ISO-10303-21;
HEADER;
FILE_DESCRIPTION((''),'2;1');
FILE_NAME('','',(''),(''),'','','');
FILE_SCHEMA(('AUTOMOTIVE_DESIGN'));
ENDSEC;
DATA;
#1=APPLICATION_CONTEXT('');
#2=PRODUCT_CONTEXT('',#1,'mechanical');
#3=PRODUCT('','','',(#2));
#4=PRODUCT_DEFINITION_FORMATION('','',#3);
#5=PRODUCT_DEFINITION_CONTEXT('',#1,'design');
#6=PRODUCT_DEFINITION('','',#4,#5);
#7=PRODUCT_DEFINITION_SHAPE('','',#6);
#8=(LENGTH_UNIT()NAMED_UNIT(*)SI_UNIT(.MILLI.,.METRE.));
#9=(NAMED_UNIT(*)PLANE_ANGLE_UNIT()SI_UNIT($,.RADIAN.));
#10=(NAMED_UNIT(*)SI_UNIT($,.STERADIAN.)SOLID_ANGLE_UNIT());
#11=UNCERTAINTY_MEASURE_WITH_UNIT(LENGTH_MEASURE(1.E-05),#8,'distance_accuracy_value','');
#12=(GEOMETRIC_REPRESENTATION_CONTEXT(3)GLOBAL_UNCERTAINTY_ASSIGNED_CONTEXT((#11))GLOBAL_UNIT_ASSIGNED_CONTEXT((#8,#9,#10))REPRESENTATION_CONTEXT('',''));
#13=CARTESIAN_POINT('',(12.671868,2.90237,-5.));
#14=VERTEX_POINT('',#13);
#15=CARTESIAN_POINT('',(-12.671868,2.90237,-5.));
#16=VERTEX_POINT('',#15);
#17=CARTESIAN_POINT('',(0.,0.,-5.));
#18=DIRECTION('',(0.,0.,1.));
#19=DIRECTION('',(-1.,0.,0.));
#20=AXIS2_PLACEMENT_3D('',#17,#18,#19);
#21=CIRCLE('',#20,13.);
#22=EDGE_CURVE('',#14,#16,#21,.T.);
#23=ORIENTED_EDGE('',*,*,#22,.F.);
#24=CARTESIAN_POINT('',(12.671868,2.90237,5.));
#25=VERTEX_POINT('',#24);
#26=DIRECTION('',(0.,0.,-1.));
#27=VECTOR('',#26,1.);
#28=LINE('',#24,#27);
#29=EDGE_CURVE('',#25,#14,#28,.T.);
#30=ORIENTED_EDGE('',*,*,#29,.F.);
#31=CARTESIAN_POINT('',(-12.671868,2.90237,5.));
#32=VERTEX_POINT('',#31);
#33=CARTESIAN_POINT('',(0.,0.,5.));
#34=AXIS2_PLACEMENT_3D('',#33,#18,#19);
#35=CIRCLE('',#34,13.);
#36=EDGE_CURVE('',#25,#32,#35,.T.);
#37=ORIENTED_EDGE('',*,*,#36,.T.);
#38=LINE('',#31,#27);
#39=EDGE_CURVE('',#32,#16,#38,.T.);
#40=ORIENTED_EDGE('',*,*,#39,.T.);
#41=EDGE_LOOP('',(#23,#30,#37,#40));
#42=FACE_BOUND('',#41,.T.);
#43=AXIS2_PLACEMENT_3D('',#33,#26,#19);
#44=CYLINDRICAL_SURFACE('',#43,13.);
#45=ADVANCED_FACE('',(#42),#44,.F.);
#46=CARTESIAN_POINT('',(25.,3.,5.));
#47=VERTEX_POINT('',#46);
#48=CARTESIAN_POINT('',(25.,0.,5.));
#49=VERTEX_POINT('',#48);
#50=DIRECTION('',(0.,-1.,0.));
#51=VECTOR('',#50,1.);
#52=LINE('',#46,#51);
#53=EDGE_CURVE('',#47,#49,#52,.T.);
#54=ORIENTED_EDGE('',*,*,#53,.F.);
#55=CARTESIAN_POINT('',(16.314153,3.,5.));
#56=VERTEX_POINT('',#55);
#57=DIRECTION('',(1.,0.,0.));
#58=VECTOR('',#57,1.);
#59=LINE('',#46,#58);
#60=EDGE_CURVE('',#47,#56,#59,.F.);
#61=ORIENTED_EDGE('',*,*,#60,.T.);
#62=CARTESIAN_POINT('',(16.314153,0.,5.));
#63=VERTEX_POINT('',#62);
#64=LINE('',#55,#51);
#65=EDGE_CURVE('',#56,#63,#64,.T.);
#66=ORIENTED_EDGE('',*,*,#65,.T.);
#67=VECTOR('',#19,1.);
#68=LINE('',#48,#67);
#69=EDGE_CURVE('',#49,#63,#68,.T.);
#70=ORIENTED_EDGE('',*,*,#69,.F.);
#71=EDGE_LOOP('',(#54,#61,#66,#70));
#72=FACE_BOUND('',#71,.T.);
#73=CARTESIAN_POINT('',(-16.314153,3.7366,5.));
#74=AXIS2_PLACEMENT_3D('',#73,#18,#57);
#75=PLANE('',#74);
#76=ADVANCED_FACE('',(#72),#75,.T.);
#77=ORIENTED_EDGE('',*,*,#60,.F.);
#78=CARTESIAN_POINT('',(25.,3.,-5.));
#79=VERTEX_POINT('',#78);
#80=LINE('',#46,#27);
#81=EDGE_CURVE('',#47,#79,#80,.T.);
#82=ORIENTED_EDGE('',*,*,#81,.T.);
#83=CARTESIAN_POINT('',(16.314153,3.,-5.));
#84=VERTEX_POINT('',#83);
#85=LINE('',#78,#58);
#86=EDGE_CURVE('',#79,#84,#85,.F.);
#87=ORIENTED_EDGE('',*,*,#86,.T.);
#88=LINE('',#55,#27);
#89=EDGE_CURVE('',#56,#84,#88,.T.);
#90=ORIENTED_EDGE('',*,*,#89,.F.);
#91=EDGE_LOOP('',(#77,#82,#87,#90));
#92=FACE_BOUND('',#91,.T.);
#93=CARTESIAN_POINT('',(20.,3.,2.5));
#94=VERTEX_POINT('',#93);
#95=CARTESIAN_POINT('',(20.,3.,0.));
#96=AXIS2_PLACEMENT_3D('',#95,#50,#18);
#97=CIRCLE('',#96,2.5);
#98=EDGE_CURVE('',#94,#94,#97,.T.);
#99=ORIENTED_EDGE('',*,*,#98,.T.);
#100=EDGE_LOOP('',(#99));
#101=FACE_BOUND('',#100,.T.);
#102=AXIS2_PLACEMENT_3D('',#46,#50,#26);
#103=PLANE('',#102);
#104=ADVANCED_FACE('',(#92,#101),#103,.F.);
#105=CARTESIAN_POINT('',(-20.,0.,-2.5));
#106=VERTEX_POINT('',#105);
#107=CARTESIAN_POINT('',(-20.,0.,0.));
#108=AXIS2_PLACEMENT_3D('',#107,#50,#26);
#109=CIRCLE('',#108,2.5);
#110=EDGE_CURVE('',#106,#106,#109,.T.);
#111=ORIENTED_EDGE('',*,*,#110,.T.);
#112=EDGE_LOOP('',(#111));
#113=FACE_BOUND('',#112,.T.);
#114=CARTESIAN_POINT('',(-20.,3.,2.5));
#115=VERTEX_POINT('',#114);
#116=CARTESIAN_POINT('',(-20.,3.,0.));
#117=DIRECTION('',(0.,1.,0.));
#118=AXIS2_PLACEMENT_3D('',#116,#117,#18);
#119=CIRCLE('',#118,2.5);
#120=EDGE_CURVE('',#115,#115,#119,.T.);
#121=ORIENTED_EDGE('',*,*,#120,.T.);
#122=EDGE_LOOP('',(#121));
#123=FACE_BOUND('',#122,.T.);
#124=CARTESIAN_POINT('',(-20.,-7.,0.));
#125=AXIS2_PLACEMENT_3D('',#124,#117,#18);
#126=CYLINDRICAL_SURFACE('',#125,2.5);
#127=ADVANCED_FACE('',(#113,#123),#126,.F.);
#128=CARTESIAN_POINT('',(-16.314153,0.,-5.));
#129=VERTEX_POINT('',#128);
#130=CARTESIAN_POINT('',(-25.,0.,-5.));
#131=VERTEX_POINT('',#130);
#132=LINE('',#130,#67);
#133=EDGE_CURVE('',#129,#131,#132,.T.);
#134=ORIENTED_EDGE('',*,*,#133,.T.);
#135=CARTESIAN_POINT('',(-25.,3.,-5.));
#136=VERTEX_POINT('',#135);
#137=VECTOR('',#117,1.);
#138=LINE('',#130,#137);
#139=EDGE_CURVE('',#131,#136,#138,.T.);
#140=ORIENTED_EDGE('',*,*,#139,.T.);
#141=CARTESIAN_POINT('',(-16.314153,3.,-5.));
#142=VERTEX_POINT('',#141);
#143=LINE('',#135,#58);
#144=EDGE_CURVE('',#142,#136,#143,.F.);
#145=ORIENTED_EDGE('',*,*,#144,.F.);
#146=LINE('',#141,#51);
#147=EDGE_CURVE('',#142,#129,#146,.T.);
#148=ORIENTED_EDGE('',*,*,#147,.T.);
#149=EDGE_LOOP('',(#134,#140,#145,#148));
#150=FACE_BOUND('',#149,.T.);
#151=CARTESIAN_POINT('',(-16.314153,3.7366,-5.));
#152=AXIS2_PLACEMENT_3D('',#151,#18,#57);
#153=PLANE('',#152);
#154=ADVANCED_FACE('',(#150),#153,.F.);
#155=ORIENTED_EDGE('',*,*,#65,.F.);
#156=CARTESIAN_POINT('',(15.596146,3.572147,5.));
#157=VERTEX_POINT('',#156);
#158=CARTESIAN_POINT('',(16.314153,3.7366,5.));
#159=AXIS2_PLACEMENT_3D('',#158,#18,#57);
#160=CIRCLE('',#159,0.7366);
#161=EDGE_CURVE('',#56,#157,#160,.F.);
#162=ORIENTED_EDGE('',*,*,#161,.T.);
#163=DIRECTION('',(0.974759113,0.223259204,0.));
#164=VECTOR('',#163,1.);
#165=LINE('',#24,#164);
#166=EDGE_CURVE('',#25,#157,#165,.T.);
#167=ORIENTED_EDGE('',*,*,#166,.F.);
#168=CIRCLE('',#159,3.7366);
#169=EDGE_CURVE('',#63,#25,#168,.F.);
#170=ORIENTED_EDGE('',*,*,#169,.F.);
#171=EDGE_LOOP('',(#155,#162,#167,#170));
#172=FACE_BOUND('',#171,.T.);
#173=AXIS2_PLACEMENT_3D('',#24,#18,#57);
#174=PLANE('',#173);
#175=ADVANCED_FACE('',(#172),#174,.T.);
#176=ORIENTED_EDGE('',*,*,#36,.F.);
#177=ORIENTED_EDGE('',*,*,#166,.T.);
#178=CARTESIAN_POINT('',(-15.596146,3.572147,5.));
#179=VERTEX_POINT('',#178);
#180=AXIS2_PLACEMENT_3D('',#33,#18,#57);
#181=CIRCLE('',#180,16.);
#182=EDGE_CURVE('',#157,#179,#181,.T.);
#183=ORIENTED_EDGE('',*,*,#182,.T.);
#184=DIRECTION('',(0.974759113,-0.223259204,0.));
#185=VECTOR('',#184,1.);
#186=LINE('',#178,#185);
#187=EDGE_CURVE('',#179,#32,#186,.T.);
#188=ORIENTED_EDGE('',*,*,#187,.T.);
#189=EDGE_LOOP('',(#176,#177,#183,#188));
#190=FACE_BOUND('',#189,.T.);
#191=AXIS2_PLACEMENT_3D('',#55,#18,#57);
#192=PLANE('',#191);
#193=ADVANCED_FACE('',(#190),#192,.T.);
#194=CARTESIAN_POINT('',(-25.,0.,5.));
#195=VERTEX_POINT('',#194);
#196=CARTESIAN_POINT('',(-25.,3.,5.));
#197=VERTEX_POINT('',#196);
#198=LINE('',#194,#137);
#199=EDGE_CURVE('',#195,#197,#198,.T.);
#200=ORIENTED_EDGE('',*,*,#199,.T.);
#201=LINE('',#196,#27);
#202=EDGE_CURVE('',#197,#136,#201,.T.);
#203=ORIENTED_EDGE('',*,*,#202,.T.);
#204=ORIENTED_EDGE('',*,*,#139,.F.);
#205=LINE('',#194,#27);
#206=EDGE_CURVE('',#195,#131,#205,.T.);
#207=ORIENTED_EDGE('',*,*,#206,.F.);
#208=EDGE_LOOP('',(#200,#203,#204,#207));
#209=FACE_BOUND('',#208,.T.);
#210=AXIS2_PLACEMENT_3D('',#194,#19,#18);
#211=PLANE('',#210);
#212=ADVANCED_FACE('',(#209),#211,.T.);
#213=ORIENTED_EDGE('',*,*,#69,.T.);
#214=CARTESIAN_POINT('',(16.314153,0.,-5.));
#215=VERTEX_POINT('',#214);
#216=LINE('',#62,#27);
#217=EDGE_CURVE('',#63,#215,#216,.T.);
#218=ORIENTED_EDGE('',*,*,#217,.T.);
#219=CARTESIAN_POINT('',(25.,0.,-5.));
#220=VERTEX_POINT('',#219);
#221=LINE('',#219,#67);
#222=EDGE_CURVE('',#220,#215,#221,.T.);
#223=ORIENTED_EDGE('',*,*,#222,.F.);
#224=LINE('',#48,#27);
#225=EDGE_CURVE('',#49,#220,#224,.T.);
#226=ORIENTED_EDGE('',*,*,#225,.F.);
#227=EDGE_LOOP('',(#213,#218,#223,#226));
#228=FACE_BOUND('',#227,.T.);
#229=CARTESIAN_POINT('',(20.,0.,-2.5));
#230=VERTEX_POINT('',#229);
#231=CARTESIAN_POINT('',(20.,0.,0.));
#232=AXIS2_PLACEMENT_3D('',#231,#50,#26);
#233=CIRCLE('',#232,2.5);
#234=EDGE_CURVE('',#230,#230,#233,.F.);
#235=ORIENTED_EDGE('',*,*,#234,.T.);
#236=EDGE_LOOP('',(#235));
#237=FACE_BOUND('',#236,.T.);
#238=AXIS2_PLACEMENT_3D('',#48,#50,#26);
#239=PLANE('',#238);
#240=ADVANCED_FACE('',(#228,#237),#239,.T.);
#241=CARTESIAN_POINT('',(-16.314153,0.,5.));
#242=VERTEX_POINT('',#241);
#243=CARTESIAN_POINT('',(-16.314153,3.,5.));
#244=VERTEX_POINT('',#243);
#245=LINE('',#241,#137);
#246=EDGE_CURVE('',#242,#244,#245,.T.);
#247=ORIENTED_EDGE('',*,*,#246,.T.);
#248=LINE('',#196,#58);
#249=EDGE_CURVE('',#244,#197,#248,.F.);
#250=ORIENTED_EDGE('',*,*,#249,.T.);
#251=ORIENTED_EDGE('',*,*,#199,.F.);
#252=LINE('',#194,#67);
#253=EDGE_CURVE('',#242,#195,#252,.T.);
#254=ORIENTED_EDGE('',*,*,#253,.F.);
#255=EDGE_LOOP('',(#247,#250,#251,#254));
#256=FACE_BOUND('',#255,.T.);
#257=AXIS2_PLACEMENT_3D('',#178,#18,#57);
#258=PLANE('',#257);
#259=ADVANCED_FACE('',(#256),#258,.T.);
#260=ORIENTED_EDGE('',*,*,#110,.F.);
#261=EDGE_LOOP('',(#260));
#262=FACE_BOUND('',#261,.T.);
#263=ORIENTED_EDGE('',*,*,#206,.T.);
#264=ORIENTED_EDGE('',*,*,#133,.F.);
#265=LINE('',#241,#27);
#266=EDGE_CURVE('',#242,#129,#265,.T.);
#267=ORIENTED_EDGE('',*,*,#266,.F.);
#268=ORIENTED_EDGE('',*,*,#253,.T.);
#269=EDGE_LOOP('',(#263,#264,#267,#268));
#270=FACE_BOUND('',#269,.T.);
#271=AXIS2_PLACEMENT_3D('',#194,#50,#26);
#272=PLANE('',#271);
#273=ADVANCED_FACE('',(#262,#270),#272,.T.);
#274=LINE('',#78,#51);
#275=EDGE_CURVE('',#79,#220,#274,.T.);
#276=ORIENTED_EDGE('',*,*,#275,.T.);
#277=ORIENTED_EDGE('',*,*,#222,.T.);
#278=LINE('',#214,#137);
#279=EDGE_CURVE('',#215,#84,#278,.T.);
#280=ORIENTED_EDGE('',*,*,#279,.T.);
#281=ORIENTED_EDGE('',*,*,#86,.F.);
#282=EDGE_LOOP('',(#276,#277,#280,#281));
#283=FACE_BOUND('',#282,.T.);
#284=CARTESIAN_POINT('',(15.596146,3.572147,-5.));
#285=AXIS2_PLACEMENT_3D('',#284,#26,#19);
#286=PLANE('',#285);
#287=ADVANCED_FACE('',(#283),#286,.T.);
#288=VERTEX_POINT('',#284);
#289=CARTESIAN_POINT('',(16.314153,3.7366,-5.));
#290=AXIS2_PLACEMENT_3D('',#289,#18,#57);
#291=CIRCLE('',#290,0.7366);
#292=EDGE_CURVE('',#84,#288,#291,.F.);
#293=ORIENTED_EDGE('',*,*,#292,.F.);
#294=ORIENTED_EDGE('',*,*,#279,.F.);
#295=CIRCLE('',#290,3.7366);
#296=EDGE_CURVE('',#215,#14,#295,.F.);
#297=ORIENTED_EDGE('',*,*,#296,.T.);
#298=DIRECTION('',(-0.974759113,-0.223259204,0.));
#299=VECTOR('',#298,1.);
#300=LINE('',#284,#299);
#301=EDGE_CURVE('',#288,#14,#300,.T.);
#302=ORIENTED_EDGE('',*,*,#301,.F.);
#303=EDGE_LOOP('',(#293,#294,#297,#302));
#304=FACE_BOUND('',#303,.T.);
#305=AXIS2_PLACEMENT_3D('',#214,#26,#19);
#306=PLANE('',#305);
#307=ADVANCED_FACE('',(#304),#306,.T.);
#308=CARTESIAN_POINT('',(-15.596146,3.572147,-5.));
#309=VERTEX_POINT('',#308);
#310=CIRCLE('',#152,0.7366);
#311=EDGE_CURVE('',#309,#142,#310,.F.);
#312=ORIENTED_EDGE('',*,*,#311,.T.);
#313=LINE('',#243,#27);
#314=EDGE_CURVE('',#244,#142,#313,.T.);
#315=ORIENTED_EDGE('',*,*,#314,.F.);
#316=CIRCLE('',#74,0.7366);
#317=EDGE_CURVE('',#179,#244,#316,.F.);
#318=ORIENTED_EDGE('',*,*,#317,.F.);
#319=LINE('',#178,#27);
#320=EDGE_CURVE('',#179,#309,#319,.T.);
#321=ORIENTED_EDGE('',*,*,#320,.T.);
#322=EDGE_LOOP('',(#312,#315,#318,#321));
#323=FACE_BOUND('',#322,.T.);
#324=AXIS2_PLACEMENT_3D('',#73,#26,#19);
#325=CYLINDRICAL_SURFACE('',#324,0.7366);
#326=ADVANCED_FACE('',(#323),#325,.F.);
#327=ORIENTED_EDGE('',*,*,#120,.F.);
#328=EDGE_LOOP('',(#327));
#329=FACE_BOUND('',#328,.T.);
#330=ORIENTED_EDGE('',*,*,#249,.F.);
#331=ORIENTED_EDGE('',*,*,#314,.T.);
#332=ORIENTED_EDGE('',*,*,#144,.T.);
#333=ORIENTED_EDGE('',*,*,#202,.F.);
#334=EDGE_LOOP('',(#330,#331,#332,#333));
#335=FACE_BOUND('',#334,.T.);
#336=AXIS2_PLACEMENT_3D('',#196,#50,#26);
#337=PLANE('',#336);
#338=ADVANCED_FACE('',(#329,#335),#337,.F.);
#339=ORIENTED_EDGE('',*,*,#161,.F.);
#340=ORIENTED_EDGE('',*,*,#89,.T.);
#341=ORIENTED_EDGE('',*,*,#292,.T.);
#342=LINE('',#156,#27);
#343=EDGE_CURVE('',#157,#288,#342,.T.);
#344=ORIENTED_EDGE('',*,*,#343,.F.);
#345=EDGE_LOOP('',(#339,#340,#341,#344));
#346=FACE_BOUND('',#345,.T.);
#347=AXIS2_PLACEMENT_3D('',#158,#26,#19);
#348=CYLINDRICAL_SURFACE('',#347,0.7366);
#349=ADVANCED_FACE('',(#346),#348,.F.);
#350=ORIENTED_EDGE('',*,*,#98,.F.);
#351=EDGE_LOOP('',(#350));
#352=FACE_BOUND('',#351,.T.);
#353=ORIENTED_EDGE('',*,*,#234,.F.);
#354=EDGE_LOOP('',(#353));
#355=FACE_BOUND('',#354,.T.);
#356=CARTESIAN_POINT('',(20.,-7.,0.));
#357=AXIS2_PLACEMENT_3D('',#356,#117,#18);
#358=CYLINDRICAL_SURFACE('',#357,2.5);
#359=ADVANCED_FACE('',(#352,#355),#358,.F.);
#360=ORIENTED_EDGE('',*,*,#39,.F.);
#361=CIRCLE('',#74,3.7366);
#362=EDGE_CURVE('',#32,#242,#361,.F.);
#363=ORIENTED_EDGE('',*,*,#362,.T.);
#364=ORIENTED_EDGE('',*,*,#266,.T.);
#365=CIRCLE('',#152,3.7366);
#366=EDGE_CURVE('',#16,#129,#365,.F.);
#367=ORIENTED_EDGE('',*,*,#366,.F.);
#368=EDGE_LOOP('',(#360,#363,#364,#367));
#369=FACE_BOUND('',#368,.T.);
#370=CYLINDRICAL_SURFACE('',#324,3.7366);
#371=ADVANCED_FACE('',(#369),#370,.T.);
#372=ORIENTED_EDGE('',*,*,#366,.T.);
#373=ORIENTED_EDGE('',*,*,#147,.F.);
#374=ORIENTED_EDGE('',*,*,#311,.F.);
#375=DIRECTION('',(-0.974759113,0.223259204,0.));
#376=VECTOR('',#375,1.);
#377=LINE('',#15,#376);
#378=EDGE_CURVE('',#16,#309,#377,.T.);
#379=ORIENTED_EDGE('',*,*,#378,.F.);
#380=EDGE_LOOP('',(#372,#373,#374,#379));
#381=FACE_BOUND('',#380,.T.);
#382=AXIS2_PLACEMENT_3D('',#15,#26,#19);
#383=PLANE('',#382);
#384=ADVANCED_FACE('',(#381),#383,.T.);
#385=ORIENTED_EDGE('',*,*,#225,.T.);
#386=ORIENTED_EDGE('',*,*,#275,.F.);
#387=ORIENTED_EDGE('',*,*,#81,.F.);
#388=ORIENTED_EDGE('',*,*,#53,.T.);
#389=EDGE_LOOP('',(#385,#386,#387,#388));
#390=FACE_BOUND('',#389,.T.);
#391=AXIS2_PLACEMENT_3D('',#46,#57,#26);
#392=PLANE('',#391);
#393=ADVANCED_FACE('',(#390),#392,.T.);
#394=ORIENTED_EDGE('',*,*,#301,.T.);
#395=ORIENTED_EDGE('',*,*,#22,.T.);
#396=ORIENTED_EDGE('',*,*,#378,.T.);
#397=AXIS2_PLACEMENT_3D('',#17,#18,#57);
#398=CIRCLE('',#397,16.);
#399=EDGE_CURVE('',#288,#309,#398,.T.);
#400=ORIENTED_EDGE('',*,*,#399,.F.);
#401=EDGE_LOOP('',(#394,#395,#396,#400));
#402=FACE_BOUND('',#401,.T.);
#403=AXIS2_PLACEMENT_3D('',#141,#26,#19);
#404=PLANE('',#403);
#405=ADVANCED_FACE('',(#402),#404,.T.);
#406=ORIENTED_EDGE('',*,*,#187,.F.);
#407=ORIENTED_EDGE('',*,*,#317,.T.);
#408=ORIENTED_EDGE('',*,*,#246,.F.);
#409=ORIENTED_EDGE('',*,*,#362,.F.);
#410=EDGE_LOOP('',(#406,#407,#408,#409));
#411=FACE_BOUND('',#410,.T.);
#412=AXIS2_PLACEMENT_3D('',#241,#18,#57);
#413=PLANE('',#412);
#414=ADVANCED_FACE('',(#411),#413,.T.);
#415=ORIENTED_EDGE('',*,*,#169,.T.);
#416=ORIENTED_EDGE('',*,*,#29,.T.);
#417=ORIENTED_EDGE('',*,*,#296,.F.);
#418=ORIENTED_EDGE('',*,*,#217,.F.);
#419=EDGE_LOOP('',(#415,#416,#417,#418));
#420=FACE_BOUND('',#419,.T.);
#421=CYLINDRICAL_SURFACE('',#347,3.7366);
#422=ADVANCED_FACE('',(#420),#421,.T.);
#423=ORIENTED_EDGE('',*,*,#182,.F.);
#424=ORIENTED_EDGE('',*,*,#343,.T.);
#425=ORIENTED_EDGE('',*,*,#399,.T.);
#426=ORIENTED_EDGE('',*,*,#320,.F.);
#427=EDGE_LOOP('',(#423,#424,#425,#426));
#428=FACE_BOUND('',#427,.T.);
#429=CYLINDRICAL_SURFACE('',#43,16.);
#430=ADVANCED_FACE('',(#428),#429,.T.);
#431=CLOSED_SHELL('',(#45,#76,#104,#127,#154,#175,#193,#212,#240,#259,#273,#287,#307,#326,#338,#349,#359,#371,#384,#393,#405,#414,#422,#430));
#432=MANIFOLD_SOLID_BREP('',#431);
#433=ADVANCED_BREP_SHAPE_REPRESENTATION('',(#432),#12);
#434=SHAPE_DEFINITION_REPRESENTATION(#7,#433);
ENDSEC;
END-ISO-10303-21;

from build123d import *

# Parameters (mm, degrees)
BASE_FLANGE1_START = -5
BASE_FLANGE1_DEPTH = 10
SKETCH6_R          = 2.5
CUT_EXTRUDE1_DEPTH = 10


# Read off the part's stored shape, not the designer's step: Base-Flange1
with BuildPart() as part:
    # Base-Flange1 outline → Base-Flange1 (new body)
    with BuildSketch(Plane.XY.offset(BASE_FLANGE1_START)):
        with BuildLine():
            Line((-16.314153364, 3), (-25, 3))
            Line((-25, 3), (-25, 0))
            Line((-25, 0), (-16.314153364, 0))
            ThreePointArc((-16.314153364, 0), (-13.985527754, 0.814326513), (-12.671868464, 2.902369657))
            ThreePointArc((-12.671868464, 2.902369657), (0, 13), (12.671868464, 2.902369657))
            ThreePointArc((12.671868464, 2.902369657), (13.985527754, 0.814326513), (16.314153364, 0))
            Line((16.314153364, 0), (25, 0))
            Line((25, 0), (25, 3))
            Line((25, 3), (16.314153364, 3))
            ThreePointArc((16.314153364, 3), (15.855108879, 3.160529066), (15.596145802, 3.57214727))
            ThreePointArc((15.596145802, 3.57214727), (0, 16), (-15.596145802, 3.57214727))
            ThreePointArc((-15.596145802, 3.57214727), (-15.855108879, 3.160529066), (-16.314153364, 3))
        make_face()
    extrude(amount=BASE_FLANGE1_DEPTH)

    # Sketch6 → Cut-Extrude1 (cut)
    with BuildSketch(Plane(origin=(0, 3, 0), x_dir=(1, 0, 0), z_dir=(0, 1, 0))):
        with Locations(Location((-20, 0, 0), (0, 0, 270))):
            Circle(SKETCH6_R)
    cut_extrude1 = extrude(amount=-CUT_EXTRUDE1_DEPTH, mode=Mode.SUBTRACT)

    # Mirror1: Cut-Extrude1 across plane
    add(cut_extrude1.mirror(Plane(origin=(0, 0, 0), x_dir=(0, 0, 1), z_dir=(1, 0, 0))), mode=Mode.SUBTRACT)


solid = part.part
